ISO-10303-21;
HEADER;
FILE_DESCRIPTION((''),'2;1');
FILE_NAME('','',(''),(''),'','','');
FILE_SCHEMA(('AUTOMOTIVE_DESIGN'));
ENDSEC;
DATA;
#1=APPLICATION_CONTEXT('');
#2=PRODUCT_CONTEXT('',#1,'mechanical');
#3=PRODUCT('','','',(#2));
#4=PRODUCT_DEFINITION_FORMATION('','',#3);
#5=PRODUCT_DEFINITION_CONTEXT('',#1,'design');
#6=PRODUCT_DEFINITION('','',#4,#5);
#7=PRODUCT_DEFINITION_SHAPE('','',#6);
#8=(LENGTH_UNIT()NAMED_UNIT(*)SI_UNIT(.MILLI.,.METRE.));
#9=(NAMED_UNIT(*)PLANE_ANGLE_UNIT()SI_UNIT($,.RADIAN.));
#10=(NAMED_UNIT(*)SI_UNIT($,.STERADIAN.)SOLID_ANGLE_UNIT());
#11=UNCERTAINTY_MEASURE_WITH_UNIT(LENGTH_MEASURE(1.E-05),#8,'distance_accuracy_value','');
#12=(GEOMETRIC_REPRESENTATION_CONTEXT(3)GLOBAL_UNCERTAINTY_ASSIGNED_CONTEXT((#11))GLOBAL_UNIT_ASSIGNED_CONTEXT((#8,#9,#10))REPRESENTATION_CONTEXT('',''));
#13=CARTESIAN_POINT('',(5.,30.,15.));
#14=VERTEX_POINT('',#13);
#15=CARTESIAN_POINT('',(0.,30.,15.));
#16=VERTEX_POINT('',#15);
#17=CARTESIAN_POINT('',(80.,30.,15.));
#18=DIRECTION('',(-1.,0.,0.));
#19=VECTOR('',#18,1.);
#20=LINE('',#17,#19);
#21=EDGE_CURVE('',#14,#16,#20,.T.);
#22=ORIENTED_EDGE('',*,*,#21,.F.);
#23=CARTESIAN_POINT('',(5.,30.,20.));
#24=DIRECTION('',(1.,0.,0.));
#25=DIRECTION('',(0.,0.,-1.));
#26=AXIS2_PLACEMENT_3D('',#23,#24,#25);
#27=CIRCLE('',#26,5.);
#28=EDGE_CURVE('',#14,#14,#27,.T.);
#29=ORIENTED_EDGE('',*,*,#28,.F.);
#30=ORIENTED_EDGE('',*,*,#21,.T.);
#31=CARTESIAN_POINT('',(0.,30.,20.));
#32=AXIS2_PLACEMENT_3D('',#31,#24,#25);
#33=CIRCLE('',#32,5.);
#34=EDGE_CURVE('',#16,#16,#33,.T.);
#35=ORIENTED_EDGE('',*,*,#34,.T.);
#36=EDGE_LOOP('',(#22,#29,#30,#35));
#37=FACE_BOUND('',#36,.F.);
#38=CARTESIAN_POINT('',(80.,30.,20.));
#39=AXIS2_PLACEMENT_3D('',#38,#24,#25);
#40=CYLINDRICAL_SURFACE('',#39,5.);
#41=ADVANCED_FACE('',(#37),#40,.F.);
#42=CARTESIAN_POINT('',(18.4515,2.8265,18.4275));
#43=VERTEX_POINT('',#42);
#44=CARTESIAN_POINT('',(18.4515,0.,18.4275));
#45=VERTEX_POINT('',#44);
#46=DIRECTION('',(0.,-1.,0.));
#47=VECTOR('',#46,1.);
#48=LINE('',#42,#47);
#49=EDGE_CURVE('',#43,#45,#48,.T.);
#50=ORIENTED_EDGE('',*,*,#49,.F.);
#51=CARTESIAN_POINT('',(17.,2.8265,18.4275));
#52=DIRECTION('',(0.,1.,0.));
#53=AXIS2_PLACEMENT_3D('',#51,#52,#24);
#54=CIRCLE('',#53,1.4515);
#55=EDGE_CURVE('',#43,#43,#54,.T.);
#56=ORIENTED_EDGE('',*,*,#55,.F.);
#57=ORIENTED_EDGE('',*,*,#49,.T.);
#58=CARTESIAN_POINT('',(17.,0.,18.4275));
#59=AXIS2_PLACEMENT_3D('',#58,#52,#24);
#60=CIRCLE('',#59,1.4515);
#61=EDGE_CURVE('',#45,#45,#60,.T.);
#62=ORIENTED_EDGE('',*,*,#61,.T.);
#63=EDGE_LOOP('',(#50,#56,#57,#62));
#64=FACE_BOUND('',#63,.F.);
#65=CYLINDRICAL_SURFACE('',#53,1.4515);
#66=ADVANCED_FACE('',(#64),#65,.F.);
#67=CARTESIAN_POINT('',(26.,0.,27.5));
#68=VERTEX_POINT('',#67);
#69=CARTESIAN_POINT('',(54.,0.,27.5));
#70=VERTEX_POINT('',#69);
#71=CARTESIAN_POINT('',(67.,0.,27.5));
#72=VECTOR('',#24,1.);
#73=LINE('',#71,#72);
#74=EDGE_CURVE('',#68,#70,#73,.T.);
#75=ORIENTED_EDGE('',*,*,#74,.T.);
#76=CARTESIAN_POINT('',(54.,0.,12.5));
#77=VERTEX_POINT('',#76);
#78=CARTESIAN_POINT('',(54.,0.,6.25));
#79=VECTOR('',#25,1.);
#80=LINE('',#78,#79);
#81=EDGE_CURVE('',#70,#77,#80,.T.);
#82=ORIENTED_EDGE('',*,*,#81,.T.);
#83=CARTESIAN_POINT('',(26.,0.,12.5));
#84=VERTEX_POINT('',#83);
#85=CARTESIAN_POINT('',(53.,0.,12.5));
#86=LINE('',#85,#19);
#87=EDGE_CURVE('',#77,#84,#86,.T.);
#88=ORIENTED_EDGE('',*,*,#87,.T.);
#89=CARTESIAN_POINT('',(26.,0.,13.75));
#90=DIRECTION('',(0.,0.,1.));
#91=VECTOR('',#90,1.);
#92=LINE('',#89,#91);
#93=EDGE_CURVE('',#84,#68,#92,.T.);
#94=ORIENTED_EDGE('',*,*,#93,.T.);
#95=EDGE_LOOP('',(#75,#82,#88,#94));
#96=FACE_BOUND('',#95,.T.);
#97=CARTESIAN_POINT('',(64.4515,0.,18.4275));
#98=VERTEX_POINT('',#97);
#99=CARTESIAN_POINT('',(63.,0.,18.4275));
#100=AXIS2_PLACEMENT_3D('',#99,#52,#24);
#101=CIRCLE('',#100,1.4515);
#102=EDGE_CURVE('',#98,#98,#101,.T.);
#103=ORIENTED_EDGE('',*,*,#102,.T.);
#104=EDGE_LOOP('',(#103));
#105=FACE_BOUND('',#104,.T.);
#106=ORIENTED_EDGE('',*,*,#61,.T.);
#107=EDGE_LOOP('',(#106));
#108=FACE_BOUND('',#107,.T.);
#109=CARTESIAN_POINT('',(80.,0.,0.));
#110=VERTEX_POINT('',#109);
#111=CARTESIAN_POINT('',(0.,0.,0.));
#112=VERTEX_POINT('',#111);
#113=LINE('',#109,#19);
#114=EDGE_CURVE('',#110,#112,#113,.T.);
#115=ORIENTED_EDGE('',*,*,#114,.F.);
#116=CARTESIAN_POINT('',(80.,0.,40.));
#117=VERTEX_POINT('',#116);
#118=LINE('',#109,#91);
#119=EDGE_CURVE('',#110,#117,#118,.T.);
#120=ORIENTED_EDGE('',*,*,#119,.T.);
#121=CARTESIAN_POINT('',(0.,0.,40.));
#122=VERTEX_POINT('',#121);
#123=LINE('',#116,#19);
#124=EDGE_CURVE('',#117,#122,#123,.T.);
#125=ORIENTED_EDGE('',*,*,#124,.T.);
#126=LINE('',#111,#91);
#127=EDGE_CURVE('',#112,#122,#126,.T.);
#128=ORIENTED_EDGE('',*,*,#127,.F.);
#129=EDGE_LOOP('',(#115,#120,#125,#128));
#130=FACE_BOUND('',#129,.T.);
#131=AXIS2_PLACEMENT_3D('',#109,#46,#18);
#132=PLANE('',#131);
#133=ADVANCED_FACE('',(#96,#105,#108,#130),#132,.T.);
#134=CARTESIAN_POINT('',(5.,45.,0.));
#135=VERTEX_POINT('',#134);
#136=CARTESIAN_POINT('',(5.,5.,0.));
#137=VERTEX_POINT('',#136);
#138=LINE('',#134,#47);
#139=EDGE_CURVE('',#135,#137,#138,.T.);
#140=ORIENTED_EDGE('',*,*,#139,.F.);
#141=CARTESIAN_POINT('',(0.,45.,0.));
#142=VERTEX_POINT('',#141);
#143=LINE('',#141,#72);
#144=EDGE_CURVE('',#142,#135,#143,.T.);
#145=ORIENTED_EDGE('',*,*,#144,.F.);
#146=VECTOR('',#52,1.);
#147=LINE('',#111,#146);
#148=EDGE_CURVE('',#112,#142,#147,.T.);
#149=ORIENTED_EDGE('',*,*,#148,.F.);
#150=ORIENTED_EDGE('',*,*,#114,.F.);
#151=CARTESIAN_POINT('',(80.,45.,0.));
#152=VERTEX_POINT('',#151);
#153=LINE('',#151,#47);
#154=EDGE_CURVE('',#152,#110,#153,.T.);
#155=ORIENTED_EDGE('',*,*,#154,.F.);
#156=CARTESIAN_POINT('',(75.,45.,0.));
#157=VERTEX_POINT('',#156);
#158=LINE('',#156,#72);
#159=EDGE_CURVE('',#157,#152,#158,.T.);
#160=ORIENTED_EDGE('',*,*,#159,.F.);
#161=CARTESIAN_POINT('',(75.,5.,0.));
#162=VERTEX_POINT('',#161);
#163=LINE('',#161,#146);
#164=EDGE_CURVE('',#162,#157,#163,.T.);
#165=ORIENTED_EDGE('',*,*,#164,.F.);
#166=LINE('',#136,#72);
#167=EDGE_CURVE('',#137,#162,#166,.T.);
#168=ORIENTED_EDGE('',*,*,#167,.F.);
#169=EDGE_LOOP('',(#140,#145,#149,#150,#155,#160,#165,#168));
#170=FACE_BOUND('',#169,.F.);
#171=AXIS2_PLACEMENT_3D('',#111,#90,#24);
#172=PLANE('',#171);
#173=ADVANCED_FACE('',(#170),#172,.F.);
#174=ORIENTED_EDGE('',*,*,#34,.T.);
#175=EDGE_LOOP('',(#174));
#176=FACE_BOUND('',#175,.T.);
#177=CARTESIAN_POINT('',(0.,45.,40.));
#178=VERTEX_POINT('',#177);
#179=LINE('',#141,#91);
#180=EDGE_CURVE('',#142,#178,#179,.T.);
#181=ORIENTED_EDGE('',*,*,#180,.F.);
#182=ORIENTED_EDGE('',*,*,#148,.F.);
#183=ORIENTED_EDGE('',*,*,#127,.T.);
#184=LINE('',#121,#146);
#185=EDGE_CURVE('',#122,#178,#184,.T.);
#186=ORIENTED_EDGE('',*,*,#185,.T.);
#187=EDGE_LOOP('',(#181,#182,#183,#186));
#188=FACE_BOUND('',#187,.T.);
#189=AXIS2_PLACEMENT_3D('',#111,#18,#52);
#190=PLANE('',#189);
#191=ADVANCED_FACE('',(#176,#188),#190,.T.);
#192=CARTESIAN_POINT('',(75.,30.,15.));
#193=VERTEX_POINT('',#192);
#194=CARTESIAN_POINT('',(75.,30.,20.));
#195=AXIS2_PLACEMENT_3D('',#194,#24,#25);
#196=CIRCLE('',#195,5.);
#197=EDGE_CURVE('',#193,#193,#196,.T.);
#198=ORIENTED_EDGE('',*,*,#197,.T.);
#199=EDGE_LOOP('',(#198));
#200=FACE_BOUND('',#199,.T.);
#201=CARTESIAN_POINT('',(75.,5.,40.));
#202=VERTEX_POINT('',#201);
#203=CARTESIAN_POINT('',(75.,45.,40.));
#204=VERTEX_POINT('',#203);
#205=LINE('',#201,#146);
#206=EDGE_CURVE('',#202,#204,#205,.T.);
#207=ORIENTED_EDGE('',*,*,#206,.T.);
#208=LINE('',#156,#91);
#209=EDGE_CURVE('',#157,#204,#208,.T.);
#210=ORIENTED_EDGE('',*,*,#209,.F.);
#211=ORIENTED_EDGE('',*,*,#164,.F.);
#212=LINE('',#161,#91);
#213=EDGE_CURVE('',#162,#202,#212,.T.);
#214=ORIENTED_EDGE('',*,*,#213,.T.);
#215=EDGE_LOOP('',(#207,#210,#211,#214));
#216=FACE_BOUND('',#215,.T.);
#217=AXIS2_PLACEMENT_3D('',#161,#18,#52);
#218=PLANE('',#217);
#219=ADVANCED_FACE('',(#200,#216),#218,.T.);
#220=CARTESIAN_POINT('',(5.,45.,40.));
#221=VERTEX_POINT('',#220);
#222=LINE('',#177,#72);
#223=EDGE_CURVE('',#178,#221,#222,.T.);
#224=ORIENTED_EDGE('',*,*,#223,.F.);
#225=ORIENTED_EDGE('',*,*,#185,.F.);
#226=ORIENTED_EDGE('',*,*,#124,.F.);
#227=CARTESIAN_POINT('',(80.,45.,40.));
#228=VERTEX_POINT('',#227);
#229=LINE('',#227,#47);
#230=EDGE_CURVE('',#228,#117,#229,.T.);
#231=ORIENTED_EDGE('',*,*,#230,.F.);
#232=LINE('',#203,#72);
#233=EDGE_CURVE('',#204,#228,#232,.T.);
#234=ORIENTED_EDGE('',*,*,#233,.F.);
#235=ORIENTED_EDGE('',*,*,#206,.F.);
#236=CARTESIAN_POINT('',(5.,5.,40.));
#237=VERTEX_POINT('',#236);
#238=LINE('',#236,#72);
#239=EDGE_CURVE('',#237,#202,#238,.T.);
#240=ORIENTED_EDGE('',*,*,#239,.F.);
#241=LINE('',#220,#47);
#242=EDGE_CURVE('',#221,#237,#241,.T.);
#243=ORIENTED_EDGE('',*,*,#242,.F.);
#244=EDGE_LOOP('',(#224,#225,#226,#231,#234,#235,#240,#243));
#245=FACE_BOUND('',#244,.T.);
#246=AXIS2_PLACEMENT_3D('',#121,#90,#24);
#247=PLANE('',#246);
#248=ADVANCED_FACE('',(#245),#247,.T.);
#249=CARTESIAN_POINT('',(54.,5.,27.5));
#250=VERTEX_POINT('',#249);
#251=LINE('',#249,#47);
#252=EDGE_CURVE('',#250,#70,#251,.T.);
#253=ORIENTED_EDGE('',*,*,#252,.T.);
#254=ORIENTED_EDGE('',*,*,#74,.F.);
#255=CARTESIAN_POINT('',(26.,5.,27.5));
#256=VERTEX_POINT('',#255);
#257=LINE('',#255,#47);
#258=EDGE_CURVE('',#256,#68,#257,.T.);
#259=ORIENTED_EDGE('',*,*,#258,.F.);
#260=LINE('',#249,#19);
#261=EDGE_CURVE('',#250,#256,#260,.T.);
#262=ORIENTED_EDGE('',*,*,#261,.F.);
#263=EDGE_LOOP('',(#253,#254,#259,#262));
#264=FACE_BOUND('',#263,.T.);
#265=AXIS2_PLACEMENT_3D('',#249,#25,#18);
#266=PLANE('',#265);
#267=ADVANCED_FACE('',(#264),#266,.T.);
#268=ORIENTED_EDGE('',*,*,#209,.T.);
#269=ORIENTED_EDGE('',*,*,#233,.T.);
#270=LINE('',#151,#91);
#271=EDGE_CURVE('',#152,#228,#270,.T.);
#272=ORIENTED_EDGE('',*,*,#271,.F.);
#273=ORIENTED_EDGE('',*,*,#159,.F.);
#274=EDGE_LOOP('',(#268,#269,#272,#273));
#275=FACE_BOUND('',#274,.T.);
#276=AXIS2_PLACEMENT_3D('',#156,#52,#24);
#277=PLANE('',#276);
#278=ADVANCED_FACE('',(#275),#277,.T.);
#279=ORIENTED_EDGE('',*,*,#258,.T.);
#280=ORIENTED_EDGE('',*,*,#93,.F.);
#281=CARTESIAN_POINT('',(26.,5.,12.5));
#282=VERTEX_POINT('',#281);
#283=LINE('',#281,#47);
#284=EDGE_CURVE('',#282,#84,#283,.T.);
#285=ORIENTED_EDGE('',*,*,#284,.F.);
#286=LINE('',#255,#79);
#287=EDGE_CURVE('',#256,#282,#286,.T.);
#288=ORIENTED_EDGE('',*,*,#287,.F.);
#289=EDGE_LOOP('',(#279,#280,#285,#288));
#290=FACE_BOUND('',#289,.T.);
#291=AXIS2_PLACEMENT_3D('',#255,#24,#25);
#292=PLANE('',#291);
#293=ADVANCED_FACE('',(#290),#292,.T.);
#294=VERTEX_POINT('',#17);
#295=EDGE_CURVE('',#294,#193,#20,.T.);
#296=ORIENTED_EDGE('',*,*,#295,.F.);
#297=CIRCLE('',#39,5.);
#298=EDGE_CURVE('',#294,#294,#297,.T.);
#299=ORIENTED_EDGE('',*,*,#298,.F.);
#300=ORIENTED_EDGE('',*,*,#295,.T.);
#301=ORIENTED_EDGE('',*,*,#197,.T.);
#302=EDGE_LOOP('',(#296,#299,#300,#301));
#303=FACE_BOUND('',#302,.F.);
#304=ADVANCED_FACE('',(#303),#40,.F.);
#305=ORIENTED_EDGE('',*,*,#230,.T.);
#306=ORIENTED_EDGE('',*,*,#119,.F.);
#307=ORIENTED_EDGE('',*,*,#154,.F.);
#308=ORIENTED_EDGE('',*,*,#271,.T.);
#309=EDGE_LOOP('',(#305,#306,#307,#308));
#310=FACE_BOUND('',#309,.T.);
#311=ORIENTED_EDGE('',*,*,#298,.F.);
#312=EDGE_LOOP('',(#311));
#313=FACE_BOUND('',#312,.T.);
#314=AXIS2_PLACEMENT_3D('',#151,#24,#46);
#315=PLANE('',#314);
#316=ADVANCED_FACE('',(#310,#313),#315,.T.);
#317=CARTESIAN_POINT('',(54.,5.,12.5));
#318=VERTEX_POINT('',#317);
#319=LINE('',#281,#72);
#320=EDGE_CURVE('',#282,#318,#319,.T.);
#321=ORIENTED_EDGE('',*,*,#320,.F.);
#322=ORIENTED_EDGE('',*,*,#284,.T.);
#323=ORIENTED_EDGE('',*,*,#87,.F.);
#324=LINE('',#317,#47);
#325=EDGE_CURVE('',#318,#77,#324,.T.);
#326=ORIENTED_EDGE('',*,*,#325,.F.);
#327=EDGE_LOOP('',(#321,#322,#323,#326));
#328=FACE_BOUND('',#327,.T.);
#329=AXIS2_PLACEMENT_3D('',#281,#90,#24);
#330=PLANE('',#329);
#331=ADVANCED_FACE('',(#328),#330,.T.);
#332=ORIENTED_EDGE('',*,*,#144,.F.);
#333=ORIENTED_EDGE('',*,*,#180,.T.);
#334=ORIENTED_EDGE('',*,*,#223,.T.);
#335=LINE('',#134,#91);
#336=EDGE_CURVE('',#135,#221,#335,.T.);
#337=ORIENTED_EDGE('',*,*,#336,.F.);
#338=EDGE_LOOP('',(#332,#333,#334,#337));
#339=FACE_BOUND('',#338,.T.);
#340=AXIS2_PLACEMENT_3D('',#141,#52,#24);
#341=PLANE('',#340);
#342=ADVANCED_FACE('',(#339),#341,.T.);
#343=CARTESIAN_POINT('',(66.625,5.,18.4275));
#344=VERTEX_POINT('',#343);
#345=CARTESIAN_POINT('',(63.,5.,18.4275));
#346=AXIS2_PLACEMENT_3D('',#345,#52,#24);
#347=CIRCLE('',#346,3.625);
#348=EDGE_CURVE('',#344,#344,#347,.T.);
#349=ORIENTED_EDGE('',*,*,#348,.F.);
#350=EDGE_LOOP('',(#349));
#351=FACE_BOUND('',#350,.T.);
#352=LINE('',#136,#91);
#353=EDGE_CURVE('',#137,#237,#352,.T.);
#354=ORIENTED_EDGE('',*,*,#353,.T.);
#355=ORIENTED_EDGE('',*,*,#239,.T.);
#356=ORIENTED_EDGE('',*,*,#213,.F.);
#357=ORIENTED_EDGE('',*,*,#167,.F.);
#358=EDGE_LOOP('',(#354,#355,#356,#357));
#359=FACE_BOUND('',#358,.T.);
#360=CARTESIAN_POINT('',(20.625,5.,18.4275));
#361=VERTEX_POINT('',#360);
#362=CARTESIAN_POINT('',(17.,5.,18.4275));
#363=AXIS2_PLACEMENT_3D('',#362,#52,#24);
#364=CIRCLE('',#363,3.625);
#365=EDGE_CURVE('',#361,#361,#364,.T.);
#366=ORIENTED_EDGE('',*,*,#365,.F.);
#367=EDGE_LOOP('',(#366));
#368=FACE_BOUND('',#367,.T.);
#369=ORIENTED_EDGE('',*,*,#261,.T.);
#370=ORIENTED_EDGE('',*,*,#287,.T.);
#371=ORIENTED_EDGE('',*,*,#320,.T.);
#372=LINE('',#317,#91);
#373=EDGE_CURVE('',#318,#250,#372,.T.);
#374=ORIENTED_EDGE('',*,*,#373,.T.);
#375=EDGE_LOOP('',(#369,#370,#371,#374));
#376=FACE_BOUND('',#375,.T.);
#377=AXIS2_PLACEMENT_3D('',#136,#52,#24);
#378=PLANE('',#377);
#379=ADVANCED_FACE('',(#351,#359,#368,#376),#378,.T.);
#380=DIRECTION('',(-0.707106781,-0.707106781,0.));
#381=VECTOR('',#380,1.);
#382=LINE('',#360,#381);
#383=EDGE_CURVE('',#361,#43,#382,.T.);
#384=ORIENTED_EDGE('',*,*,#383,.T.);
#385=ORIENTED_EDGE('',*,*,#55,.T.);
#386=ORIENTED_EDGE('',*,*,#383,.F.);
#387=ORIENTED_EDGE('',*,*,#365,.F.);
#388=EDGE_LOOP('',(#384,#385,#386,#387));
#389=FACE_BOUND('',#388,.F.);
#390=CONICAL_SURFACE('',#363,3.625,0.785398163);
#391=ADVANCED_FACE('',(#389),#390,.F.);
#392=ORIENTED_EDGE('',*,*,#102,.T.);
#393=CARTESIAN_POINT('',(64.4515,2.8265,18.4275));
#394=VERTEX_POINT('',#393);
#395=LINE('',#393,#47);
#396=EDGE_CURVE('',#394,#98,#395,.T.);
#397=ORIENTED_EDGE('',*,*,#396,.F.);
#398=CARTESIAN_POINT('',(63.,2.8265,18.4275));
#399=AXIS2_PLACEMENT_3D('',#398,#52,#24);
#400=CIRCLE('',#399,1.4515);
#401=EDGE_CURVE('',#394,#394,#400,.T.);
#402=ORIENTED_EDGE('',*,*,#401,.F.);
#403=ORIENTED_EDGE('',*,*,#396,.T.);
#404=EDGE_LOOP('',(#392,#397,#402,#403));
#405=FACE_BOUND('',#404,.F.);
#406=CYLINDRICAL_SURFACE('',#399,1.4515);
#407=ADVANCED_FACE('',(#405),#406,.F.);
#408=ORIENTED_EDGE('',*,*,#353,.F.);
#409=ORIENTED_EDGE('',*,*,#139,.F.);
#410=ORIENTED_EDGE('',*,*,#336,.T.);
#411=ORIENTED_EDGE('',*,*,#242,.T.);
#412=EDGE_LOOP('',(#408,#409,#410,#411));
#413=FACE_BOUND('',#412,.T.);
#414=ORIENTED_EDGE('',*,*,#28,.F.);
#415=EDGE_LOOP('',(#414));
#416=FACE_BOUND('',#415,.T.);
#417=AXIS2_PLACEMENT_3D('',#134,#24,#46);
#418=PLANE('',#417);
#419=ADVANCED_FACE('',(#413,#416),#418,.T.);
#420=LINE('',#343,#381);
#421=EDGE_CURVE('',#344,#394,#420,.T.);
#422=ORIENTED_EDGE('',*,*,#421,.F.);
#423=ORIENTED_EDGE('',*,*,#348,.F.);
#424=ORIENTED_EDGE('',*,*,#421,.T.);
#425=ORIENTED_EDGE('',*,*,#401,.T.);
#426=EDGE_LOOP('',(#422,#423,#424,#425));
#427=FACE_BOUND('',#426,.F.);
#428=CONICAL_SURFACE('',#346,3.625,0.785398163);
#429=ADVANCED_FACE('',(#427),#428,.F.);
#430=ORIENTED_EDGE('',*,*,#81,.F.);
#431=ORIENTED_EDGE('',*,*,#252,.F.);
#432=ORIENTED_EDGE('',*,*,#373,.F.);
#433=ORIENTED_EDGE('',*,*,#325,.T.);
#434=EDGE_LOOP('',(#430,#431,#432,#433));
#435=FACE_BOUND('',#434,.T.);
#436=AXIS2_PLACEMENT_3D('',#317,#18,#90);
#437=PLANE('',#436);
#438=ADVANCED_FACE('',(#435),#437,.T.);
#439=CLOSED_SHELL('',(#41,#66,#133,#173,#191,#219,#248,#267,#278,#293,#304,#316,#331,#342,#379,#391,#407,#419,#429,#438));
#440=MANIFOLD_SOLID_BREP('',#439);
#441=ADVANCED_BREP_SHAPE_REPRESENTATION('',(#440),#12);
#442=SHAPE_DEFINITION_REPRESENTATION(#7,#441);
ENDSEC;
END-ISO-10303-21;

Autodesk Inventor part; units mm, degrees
ref_plane "YZ Plane" through (0, 0, 0) normal (1, 0, 0) x (0, 1, 0)
ref_plane "XZ Plane" through (0, 0, 0) normal (0, 1, 0) x (-1, 0, 0)
ref_plane "XY Plane" through (0, 0, 0) normal (0, 0, 1) x (1, 0, 0)
sketch "Sketch1" plane through (0, 0, 0) normal (0, 0, 1) x (1, 0, 0)
  line L0 (0, 0) -> (0, 45)
  line L1 (0, 45) -> (5, 45)
  line L2 (5, 45) -> (5, 5)
  line L3 (5, 5) -> (75, 5)
  line L4 (75, 5) -> (75, 45)
  line L5 (75, 45) -> (80, 45)
  line L6 (80, 45) -> (80, 0)
  line L7 (80, 0) -> (0, 0)
  dimension "d0" = 45
  dimension "d1" = 5
  dimension "d2" = 40
  dimension "d3" = 70
  dimension "d4" = 40
  dimension "d5" = 5
  dimension "d6" = 45
extrude "Extrusion1" add sketch "Sketch1" along normal blind 40
sketch "Sketch2" plane through (80, 0, 0) normal (1, 0, 0) x (0, 0, -1)
  circle A0 centre (-20, 30) radius 5
  line L0 (0, 45) -> (-40, 45) projected
  line L1 (0, 0) -> (0, 45) projected
  dimension "d9" = 10
  dimension "d10" = 15
  dimension "d11" = 20
extrude "Extrusion2" cut sketch "Sketch2" against normal through all
sketch "Sketch3" plane through (5, 5, 0) normal (0, 1, 0) x (1, 0, 0)
  line L0 (21, -12.5) -> (49, -12.5)
  line L1 (49, -12.5) -> (49, -27.5)
  line L2 (49, -27.5) -> (21, -27.5)
  line L3 (21, -27.5) -> (21, -12.5)
  line L4 (21, -12.5) -> (49, -27.5) construction
  line L5 (49, -12.5) -> (21, -27.5) construction
  line L6 (70, 0) -> (0, 0) projected
  line L7 (0, 0) -> (0, -40) projected
  point P0 (-5, 0)
  point P1 (35, -20)
  dimension "d14" = 28
  dimension "d15" = 15
  dimension "d16" = 20
  dimension "d17" = 35
extrude "Extrusion3" cut sketch "Sketch3" against normal blind 10
sketch "Sketch4" plane through (5, 5, 0) normal (0, 1, 0) x (1, 0, 0)
  circle A0 centre (12, -18.4275) radius 3.625
  circle A1 centre (58, -18.4275) radius 3.625
  line L0 (21, -27.5) -> (21, -12.5) projected
  line L1 (49, -12.5) -> (49, -27.5) projected
  point P0 (-5, 0)
  dimension "d20" = 7.25
  dimension "d21" = 7.25
  dimension "d22" = 9
  dimension "d23" = 9
extrude "Extrusion4" cut sketch "Sketch4" against normal blind 2.1735 draft -45
sketch "Sketch5" plane through (17, 2.8265, 18.4275) normal (0, 1, 0) x (1, 0, 0)
  circle A0 centre (0, 0) radius 1.4515
  circle A1 centre (46, 0) radius 1.4515
  line L0 (37, 5.9275) -> (37, -9.0725) projected
  point P0 (-17, 18.4275)
  dimension "d26" = 2.903
  dimension "d27" = 9
extrude "Extrusion5" cut sketch "Sketch5" against normal through all
properties part number "base and 1st arm link"
